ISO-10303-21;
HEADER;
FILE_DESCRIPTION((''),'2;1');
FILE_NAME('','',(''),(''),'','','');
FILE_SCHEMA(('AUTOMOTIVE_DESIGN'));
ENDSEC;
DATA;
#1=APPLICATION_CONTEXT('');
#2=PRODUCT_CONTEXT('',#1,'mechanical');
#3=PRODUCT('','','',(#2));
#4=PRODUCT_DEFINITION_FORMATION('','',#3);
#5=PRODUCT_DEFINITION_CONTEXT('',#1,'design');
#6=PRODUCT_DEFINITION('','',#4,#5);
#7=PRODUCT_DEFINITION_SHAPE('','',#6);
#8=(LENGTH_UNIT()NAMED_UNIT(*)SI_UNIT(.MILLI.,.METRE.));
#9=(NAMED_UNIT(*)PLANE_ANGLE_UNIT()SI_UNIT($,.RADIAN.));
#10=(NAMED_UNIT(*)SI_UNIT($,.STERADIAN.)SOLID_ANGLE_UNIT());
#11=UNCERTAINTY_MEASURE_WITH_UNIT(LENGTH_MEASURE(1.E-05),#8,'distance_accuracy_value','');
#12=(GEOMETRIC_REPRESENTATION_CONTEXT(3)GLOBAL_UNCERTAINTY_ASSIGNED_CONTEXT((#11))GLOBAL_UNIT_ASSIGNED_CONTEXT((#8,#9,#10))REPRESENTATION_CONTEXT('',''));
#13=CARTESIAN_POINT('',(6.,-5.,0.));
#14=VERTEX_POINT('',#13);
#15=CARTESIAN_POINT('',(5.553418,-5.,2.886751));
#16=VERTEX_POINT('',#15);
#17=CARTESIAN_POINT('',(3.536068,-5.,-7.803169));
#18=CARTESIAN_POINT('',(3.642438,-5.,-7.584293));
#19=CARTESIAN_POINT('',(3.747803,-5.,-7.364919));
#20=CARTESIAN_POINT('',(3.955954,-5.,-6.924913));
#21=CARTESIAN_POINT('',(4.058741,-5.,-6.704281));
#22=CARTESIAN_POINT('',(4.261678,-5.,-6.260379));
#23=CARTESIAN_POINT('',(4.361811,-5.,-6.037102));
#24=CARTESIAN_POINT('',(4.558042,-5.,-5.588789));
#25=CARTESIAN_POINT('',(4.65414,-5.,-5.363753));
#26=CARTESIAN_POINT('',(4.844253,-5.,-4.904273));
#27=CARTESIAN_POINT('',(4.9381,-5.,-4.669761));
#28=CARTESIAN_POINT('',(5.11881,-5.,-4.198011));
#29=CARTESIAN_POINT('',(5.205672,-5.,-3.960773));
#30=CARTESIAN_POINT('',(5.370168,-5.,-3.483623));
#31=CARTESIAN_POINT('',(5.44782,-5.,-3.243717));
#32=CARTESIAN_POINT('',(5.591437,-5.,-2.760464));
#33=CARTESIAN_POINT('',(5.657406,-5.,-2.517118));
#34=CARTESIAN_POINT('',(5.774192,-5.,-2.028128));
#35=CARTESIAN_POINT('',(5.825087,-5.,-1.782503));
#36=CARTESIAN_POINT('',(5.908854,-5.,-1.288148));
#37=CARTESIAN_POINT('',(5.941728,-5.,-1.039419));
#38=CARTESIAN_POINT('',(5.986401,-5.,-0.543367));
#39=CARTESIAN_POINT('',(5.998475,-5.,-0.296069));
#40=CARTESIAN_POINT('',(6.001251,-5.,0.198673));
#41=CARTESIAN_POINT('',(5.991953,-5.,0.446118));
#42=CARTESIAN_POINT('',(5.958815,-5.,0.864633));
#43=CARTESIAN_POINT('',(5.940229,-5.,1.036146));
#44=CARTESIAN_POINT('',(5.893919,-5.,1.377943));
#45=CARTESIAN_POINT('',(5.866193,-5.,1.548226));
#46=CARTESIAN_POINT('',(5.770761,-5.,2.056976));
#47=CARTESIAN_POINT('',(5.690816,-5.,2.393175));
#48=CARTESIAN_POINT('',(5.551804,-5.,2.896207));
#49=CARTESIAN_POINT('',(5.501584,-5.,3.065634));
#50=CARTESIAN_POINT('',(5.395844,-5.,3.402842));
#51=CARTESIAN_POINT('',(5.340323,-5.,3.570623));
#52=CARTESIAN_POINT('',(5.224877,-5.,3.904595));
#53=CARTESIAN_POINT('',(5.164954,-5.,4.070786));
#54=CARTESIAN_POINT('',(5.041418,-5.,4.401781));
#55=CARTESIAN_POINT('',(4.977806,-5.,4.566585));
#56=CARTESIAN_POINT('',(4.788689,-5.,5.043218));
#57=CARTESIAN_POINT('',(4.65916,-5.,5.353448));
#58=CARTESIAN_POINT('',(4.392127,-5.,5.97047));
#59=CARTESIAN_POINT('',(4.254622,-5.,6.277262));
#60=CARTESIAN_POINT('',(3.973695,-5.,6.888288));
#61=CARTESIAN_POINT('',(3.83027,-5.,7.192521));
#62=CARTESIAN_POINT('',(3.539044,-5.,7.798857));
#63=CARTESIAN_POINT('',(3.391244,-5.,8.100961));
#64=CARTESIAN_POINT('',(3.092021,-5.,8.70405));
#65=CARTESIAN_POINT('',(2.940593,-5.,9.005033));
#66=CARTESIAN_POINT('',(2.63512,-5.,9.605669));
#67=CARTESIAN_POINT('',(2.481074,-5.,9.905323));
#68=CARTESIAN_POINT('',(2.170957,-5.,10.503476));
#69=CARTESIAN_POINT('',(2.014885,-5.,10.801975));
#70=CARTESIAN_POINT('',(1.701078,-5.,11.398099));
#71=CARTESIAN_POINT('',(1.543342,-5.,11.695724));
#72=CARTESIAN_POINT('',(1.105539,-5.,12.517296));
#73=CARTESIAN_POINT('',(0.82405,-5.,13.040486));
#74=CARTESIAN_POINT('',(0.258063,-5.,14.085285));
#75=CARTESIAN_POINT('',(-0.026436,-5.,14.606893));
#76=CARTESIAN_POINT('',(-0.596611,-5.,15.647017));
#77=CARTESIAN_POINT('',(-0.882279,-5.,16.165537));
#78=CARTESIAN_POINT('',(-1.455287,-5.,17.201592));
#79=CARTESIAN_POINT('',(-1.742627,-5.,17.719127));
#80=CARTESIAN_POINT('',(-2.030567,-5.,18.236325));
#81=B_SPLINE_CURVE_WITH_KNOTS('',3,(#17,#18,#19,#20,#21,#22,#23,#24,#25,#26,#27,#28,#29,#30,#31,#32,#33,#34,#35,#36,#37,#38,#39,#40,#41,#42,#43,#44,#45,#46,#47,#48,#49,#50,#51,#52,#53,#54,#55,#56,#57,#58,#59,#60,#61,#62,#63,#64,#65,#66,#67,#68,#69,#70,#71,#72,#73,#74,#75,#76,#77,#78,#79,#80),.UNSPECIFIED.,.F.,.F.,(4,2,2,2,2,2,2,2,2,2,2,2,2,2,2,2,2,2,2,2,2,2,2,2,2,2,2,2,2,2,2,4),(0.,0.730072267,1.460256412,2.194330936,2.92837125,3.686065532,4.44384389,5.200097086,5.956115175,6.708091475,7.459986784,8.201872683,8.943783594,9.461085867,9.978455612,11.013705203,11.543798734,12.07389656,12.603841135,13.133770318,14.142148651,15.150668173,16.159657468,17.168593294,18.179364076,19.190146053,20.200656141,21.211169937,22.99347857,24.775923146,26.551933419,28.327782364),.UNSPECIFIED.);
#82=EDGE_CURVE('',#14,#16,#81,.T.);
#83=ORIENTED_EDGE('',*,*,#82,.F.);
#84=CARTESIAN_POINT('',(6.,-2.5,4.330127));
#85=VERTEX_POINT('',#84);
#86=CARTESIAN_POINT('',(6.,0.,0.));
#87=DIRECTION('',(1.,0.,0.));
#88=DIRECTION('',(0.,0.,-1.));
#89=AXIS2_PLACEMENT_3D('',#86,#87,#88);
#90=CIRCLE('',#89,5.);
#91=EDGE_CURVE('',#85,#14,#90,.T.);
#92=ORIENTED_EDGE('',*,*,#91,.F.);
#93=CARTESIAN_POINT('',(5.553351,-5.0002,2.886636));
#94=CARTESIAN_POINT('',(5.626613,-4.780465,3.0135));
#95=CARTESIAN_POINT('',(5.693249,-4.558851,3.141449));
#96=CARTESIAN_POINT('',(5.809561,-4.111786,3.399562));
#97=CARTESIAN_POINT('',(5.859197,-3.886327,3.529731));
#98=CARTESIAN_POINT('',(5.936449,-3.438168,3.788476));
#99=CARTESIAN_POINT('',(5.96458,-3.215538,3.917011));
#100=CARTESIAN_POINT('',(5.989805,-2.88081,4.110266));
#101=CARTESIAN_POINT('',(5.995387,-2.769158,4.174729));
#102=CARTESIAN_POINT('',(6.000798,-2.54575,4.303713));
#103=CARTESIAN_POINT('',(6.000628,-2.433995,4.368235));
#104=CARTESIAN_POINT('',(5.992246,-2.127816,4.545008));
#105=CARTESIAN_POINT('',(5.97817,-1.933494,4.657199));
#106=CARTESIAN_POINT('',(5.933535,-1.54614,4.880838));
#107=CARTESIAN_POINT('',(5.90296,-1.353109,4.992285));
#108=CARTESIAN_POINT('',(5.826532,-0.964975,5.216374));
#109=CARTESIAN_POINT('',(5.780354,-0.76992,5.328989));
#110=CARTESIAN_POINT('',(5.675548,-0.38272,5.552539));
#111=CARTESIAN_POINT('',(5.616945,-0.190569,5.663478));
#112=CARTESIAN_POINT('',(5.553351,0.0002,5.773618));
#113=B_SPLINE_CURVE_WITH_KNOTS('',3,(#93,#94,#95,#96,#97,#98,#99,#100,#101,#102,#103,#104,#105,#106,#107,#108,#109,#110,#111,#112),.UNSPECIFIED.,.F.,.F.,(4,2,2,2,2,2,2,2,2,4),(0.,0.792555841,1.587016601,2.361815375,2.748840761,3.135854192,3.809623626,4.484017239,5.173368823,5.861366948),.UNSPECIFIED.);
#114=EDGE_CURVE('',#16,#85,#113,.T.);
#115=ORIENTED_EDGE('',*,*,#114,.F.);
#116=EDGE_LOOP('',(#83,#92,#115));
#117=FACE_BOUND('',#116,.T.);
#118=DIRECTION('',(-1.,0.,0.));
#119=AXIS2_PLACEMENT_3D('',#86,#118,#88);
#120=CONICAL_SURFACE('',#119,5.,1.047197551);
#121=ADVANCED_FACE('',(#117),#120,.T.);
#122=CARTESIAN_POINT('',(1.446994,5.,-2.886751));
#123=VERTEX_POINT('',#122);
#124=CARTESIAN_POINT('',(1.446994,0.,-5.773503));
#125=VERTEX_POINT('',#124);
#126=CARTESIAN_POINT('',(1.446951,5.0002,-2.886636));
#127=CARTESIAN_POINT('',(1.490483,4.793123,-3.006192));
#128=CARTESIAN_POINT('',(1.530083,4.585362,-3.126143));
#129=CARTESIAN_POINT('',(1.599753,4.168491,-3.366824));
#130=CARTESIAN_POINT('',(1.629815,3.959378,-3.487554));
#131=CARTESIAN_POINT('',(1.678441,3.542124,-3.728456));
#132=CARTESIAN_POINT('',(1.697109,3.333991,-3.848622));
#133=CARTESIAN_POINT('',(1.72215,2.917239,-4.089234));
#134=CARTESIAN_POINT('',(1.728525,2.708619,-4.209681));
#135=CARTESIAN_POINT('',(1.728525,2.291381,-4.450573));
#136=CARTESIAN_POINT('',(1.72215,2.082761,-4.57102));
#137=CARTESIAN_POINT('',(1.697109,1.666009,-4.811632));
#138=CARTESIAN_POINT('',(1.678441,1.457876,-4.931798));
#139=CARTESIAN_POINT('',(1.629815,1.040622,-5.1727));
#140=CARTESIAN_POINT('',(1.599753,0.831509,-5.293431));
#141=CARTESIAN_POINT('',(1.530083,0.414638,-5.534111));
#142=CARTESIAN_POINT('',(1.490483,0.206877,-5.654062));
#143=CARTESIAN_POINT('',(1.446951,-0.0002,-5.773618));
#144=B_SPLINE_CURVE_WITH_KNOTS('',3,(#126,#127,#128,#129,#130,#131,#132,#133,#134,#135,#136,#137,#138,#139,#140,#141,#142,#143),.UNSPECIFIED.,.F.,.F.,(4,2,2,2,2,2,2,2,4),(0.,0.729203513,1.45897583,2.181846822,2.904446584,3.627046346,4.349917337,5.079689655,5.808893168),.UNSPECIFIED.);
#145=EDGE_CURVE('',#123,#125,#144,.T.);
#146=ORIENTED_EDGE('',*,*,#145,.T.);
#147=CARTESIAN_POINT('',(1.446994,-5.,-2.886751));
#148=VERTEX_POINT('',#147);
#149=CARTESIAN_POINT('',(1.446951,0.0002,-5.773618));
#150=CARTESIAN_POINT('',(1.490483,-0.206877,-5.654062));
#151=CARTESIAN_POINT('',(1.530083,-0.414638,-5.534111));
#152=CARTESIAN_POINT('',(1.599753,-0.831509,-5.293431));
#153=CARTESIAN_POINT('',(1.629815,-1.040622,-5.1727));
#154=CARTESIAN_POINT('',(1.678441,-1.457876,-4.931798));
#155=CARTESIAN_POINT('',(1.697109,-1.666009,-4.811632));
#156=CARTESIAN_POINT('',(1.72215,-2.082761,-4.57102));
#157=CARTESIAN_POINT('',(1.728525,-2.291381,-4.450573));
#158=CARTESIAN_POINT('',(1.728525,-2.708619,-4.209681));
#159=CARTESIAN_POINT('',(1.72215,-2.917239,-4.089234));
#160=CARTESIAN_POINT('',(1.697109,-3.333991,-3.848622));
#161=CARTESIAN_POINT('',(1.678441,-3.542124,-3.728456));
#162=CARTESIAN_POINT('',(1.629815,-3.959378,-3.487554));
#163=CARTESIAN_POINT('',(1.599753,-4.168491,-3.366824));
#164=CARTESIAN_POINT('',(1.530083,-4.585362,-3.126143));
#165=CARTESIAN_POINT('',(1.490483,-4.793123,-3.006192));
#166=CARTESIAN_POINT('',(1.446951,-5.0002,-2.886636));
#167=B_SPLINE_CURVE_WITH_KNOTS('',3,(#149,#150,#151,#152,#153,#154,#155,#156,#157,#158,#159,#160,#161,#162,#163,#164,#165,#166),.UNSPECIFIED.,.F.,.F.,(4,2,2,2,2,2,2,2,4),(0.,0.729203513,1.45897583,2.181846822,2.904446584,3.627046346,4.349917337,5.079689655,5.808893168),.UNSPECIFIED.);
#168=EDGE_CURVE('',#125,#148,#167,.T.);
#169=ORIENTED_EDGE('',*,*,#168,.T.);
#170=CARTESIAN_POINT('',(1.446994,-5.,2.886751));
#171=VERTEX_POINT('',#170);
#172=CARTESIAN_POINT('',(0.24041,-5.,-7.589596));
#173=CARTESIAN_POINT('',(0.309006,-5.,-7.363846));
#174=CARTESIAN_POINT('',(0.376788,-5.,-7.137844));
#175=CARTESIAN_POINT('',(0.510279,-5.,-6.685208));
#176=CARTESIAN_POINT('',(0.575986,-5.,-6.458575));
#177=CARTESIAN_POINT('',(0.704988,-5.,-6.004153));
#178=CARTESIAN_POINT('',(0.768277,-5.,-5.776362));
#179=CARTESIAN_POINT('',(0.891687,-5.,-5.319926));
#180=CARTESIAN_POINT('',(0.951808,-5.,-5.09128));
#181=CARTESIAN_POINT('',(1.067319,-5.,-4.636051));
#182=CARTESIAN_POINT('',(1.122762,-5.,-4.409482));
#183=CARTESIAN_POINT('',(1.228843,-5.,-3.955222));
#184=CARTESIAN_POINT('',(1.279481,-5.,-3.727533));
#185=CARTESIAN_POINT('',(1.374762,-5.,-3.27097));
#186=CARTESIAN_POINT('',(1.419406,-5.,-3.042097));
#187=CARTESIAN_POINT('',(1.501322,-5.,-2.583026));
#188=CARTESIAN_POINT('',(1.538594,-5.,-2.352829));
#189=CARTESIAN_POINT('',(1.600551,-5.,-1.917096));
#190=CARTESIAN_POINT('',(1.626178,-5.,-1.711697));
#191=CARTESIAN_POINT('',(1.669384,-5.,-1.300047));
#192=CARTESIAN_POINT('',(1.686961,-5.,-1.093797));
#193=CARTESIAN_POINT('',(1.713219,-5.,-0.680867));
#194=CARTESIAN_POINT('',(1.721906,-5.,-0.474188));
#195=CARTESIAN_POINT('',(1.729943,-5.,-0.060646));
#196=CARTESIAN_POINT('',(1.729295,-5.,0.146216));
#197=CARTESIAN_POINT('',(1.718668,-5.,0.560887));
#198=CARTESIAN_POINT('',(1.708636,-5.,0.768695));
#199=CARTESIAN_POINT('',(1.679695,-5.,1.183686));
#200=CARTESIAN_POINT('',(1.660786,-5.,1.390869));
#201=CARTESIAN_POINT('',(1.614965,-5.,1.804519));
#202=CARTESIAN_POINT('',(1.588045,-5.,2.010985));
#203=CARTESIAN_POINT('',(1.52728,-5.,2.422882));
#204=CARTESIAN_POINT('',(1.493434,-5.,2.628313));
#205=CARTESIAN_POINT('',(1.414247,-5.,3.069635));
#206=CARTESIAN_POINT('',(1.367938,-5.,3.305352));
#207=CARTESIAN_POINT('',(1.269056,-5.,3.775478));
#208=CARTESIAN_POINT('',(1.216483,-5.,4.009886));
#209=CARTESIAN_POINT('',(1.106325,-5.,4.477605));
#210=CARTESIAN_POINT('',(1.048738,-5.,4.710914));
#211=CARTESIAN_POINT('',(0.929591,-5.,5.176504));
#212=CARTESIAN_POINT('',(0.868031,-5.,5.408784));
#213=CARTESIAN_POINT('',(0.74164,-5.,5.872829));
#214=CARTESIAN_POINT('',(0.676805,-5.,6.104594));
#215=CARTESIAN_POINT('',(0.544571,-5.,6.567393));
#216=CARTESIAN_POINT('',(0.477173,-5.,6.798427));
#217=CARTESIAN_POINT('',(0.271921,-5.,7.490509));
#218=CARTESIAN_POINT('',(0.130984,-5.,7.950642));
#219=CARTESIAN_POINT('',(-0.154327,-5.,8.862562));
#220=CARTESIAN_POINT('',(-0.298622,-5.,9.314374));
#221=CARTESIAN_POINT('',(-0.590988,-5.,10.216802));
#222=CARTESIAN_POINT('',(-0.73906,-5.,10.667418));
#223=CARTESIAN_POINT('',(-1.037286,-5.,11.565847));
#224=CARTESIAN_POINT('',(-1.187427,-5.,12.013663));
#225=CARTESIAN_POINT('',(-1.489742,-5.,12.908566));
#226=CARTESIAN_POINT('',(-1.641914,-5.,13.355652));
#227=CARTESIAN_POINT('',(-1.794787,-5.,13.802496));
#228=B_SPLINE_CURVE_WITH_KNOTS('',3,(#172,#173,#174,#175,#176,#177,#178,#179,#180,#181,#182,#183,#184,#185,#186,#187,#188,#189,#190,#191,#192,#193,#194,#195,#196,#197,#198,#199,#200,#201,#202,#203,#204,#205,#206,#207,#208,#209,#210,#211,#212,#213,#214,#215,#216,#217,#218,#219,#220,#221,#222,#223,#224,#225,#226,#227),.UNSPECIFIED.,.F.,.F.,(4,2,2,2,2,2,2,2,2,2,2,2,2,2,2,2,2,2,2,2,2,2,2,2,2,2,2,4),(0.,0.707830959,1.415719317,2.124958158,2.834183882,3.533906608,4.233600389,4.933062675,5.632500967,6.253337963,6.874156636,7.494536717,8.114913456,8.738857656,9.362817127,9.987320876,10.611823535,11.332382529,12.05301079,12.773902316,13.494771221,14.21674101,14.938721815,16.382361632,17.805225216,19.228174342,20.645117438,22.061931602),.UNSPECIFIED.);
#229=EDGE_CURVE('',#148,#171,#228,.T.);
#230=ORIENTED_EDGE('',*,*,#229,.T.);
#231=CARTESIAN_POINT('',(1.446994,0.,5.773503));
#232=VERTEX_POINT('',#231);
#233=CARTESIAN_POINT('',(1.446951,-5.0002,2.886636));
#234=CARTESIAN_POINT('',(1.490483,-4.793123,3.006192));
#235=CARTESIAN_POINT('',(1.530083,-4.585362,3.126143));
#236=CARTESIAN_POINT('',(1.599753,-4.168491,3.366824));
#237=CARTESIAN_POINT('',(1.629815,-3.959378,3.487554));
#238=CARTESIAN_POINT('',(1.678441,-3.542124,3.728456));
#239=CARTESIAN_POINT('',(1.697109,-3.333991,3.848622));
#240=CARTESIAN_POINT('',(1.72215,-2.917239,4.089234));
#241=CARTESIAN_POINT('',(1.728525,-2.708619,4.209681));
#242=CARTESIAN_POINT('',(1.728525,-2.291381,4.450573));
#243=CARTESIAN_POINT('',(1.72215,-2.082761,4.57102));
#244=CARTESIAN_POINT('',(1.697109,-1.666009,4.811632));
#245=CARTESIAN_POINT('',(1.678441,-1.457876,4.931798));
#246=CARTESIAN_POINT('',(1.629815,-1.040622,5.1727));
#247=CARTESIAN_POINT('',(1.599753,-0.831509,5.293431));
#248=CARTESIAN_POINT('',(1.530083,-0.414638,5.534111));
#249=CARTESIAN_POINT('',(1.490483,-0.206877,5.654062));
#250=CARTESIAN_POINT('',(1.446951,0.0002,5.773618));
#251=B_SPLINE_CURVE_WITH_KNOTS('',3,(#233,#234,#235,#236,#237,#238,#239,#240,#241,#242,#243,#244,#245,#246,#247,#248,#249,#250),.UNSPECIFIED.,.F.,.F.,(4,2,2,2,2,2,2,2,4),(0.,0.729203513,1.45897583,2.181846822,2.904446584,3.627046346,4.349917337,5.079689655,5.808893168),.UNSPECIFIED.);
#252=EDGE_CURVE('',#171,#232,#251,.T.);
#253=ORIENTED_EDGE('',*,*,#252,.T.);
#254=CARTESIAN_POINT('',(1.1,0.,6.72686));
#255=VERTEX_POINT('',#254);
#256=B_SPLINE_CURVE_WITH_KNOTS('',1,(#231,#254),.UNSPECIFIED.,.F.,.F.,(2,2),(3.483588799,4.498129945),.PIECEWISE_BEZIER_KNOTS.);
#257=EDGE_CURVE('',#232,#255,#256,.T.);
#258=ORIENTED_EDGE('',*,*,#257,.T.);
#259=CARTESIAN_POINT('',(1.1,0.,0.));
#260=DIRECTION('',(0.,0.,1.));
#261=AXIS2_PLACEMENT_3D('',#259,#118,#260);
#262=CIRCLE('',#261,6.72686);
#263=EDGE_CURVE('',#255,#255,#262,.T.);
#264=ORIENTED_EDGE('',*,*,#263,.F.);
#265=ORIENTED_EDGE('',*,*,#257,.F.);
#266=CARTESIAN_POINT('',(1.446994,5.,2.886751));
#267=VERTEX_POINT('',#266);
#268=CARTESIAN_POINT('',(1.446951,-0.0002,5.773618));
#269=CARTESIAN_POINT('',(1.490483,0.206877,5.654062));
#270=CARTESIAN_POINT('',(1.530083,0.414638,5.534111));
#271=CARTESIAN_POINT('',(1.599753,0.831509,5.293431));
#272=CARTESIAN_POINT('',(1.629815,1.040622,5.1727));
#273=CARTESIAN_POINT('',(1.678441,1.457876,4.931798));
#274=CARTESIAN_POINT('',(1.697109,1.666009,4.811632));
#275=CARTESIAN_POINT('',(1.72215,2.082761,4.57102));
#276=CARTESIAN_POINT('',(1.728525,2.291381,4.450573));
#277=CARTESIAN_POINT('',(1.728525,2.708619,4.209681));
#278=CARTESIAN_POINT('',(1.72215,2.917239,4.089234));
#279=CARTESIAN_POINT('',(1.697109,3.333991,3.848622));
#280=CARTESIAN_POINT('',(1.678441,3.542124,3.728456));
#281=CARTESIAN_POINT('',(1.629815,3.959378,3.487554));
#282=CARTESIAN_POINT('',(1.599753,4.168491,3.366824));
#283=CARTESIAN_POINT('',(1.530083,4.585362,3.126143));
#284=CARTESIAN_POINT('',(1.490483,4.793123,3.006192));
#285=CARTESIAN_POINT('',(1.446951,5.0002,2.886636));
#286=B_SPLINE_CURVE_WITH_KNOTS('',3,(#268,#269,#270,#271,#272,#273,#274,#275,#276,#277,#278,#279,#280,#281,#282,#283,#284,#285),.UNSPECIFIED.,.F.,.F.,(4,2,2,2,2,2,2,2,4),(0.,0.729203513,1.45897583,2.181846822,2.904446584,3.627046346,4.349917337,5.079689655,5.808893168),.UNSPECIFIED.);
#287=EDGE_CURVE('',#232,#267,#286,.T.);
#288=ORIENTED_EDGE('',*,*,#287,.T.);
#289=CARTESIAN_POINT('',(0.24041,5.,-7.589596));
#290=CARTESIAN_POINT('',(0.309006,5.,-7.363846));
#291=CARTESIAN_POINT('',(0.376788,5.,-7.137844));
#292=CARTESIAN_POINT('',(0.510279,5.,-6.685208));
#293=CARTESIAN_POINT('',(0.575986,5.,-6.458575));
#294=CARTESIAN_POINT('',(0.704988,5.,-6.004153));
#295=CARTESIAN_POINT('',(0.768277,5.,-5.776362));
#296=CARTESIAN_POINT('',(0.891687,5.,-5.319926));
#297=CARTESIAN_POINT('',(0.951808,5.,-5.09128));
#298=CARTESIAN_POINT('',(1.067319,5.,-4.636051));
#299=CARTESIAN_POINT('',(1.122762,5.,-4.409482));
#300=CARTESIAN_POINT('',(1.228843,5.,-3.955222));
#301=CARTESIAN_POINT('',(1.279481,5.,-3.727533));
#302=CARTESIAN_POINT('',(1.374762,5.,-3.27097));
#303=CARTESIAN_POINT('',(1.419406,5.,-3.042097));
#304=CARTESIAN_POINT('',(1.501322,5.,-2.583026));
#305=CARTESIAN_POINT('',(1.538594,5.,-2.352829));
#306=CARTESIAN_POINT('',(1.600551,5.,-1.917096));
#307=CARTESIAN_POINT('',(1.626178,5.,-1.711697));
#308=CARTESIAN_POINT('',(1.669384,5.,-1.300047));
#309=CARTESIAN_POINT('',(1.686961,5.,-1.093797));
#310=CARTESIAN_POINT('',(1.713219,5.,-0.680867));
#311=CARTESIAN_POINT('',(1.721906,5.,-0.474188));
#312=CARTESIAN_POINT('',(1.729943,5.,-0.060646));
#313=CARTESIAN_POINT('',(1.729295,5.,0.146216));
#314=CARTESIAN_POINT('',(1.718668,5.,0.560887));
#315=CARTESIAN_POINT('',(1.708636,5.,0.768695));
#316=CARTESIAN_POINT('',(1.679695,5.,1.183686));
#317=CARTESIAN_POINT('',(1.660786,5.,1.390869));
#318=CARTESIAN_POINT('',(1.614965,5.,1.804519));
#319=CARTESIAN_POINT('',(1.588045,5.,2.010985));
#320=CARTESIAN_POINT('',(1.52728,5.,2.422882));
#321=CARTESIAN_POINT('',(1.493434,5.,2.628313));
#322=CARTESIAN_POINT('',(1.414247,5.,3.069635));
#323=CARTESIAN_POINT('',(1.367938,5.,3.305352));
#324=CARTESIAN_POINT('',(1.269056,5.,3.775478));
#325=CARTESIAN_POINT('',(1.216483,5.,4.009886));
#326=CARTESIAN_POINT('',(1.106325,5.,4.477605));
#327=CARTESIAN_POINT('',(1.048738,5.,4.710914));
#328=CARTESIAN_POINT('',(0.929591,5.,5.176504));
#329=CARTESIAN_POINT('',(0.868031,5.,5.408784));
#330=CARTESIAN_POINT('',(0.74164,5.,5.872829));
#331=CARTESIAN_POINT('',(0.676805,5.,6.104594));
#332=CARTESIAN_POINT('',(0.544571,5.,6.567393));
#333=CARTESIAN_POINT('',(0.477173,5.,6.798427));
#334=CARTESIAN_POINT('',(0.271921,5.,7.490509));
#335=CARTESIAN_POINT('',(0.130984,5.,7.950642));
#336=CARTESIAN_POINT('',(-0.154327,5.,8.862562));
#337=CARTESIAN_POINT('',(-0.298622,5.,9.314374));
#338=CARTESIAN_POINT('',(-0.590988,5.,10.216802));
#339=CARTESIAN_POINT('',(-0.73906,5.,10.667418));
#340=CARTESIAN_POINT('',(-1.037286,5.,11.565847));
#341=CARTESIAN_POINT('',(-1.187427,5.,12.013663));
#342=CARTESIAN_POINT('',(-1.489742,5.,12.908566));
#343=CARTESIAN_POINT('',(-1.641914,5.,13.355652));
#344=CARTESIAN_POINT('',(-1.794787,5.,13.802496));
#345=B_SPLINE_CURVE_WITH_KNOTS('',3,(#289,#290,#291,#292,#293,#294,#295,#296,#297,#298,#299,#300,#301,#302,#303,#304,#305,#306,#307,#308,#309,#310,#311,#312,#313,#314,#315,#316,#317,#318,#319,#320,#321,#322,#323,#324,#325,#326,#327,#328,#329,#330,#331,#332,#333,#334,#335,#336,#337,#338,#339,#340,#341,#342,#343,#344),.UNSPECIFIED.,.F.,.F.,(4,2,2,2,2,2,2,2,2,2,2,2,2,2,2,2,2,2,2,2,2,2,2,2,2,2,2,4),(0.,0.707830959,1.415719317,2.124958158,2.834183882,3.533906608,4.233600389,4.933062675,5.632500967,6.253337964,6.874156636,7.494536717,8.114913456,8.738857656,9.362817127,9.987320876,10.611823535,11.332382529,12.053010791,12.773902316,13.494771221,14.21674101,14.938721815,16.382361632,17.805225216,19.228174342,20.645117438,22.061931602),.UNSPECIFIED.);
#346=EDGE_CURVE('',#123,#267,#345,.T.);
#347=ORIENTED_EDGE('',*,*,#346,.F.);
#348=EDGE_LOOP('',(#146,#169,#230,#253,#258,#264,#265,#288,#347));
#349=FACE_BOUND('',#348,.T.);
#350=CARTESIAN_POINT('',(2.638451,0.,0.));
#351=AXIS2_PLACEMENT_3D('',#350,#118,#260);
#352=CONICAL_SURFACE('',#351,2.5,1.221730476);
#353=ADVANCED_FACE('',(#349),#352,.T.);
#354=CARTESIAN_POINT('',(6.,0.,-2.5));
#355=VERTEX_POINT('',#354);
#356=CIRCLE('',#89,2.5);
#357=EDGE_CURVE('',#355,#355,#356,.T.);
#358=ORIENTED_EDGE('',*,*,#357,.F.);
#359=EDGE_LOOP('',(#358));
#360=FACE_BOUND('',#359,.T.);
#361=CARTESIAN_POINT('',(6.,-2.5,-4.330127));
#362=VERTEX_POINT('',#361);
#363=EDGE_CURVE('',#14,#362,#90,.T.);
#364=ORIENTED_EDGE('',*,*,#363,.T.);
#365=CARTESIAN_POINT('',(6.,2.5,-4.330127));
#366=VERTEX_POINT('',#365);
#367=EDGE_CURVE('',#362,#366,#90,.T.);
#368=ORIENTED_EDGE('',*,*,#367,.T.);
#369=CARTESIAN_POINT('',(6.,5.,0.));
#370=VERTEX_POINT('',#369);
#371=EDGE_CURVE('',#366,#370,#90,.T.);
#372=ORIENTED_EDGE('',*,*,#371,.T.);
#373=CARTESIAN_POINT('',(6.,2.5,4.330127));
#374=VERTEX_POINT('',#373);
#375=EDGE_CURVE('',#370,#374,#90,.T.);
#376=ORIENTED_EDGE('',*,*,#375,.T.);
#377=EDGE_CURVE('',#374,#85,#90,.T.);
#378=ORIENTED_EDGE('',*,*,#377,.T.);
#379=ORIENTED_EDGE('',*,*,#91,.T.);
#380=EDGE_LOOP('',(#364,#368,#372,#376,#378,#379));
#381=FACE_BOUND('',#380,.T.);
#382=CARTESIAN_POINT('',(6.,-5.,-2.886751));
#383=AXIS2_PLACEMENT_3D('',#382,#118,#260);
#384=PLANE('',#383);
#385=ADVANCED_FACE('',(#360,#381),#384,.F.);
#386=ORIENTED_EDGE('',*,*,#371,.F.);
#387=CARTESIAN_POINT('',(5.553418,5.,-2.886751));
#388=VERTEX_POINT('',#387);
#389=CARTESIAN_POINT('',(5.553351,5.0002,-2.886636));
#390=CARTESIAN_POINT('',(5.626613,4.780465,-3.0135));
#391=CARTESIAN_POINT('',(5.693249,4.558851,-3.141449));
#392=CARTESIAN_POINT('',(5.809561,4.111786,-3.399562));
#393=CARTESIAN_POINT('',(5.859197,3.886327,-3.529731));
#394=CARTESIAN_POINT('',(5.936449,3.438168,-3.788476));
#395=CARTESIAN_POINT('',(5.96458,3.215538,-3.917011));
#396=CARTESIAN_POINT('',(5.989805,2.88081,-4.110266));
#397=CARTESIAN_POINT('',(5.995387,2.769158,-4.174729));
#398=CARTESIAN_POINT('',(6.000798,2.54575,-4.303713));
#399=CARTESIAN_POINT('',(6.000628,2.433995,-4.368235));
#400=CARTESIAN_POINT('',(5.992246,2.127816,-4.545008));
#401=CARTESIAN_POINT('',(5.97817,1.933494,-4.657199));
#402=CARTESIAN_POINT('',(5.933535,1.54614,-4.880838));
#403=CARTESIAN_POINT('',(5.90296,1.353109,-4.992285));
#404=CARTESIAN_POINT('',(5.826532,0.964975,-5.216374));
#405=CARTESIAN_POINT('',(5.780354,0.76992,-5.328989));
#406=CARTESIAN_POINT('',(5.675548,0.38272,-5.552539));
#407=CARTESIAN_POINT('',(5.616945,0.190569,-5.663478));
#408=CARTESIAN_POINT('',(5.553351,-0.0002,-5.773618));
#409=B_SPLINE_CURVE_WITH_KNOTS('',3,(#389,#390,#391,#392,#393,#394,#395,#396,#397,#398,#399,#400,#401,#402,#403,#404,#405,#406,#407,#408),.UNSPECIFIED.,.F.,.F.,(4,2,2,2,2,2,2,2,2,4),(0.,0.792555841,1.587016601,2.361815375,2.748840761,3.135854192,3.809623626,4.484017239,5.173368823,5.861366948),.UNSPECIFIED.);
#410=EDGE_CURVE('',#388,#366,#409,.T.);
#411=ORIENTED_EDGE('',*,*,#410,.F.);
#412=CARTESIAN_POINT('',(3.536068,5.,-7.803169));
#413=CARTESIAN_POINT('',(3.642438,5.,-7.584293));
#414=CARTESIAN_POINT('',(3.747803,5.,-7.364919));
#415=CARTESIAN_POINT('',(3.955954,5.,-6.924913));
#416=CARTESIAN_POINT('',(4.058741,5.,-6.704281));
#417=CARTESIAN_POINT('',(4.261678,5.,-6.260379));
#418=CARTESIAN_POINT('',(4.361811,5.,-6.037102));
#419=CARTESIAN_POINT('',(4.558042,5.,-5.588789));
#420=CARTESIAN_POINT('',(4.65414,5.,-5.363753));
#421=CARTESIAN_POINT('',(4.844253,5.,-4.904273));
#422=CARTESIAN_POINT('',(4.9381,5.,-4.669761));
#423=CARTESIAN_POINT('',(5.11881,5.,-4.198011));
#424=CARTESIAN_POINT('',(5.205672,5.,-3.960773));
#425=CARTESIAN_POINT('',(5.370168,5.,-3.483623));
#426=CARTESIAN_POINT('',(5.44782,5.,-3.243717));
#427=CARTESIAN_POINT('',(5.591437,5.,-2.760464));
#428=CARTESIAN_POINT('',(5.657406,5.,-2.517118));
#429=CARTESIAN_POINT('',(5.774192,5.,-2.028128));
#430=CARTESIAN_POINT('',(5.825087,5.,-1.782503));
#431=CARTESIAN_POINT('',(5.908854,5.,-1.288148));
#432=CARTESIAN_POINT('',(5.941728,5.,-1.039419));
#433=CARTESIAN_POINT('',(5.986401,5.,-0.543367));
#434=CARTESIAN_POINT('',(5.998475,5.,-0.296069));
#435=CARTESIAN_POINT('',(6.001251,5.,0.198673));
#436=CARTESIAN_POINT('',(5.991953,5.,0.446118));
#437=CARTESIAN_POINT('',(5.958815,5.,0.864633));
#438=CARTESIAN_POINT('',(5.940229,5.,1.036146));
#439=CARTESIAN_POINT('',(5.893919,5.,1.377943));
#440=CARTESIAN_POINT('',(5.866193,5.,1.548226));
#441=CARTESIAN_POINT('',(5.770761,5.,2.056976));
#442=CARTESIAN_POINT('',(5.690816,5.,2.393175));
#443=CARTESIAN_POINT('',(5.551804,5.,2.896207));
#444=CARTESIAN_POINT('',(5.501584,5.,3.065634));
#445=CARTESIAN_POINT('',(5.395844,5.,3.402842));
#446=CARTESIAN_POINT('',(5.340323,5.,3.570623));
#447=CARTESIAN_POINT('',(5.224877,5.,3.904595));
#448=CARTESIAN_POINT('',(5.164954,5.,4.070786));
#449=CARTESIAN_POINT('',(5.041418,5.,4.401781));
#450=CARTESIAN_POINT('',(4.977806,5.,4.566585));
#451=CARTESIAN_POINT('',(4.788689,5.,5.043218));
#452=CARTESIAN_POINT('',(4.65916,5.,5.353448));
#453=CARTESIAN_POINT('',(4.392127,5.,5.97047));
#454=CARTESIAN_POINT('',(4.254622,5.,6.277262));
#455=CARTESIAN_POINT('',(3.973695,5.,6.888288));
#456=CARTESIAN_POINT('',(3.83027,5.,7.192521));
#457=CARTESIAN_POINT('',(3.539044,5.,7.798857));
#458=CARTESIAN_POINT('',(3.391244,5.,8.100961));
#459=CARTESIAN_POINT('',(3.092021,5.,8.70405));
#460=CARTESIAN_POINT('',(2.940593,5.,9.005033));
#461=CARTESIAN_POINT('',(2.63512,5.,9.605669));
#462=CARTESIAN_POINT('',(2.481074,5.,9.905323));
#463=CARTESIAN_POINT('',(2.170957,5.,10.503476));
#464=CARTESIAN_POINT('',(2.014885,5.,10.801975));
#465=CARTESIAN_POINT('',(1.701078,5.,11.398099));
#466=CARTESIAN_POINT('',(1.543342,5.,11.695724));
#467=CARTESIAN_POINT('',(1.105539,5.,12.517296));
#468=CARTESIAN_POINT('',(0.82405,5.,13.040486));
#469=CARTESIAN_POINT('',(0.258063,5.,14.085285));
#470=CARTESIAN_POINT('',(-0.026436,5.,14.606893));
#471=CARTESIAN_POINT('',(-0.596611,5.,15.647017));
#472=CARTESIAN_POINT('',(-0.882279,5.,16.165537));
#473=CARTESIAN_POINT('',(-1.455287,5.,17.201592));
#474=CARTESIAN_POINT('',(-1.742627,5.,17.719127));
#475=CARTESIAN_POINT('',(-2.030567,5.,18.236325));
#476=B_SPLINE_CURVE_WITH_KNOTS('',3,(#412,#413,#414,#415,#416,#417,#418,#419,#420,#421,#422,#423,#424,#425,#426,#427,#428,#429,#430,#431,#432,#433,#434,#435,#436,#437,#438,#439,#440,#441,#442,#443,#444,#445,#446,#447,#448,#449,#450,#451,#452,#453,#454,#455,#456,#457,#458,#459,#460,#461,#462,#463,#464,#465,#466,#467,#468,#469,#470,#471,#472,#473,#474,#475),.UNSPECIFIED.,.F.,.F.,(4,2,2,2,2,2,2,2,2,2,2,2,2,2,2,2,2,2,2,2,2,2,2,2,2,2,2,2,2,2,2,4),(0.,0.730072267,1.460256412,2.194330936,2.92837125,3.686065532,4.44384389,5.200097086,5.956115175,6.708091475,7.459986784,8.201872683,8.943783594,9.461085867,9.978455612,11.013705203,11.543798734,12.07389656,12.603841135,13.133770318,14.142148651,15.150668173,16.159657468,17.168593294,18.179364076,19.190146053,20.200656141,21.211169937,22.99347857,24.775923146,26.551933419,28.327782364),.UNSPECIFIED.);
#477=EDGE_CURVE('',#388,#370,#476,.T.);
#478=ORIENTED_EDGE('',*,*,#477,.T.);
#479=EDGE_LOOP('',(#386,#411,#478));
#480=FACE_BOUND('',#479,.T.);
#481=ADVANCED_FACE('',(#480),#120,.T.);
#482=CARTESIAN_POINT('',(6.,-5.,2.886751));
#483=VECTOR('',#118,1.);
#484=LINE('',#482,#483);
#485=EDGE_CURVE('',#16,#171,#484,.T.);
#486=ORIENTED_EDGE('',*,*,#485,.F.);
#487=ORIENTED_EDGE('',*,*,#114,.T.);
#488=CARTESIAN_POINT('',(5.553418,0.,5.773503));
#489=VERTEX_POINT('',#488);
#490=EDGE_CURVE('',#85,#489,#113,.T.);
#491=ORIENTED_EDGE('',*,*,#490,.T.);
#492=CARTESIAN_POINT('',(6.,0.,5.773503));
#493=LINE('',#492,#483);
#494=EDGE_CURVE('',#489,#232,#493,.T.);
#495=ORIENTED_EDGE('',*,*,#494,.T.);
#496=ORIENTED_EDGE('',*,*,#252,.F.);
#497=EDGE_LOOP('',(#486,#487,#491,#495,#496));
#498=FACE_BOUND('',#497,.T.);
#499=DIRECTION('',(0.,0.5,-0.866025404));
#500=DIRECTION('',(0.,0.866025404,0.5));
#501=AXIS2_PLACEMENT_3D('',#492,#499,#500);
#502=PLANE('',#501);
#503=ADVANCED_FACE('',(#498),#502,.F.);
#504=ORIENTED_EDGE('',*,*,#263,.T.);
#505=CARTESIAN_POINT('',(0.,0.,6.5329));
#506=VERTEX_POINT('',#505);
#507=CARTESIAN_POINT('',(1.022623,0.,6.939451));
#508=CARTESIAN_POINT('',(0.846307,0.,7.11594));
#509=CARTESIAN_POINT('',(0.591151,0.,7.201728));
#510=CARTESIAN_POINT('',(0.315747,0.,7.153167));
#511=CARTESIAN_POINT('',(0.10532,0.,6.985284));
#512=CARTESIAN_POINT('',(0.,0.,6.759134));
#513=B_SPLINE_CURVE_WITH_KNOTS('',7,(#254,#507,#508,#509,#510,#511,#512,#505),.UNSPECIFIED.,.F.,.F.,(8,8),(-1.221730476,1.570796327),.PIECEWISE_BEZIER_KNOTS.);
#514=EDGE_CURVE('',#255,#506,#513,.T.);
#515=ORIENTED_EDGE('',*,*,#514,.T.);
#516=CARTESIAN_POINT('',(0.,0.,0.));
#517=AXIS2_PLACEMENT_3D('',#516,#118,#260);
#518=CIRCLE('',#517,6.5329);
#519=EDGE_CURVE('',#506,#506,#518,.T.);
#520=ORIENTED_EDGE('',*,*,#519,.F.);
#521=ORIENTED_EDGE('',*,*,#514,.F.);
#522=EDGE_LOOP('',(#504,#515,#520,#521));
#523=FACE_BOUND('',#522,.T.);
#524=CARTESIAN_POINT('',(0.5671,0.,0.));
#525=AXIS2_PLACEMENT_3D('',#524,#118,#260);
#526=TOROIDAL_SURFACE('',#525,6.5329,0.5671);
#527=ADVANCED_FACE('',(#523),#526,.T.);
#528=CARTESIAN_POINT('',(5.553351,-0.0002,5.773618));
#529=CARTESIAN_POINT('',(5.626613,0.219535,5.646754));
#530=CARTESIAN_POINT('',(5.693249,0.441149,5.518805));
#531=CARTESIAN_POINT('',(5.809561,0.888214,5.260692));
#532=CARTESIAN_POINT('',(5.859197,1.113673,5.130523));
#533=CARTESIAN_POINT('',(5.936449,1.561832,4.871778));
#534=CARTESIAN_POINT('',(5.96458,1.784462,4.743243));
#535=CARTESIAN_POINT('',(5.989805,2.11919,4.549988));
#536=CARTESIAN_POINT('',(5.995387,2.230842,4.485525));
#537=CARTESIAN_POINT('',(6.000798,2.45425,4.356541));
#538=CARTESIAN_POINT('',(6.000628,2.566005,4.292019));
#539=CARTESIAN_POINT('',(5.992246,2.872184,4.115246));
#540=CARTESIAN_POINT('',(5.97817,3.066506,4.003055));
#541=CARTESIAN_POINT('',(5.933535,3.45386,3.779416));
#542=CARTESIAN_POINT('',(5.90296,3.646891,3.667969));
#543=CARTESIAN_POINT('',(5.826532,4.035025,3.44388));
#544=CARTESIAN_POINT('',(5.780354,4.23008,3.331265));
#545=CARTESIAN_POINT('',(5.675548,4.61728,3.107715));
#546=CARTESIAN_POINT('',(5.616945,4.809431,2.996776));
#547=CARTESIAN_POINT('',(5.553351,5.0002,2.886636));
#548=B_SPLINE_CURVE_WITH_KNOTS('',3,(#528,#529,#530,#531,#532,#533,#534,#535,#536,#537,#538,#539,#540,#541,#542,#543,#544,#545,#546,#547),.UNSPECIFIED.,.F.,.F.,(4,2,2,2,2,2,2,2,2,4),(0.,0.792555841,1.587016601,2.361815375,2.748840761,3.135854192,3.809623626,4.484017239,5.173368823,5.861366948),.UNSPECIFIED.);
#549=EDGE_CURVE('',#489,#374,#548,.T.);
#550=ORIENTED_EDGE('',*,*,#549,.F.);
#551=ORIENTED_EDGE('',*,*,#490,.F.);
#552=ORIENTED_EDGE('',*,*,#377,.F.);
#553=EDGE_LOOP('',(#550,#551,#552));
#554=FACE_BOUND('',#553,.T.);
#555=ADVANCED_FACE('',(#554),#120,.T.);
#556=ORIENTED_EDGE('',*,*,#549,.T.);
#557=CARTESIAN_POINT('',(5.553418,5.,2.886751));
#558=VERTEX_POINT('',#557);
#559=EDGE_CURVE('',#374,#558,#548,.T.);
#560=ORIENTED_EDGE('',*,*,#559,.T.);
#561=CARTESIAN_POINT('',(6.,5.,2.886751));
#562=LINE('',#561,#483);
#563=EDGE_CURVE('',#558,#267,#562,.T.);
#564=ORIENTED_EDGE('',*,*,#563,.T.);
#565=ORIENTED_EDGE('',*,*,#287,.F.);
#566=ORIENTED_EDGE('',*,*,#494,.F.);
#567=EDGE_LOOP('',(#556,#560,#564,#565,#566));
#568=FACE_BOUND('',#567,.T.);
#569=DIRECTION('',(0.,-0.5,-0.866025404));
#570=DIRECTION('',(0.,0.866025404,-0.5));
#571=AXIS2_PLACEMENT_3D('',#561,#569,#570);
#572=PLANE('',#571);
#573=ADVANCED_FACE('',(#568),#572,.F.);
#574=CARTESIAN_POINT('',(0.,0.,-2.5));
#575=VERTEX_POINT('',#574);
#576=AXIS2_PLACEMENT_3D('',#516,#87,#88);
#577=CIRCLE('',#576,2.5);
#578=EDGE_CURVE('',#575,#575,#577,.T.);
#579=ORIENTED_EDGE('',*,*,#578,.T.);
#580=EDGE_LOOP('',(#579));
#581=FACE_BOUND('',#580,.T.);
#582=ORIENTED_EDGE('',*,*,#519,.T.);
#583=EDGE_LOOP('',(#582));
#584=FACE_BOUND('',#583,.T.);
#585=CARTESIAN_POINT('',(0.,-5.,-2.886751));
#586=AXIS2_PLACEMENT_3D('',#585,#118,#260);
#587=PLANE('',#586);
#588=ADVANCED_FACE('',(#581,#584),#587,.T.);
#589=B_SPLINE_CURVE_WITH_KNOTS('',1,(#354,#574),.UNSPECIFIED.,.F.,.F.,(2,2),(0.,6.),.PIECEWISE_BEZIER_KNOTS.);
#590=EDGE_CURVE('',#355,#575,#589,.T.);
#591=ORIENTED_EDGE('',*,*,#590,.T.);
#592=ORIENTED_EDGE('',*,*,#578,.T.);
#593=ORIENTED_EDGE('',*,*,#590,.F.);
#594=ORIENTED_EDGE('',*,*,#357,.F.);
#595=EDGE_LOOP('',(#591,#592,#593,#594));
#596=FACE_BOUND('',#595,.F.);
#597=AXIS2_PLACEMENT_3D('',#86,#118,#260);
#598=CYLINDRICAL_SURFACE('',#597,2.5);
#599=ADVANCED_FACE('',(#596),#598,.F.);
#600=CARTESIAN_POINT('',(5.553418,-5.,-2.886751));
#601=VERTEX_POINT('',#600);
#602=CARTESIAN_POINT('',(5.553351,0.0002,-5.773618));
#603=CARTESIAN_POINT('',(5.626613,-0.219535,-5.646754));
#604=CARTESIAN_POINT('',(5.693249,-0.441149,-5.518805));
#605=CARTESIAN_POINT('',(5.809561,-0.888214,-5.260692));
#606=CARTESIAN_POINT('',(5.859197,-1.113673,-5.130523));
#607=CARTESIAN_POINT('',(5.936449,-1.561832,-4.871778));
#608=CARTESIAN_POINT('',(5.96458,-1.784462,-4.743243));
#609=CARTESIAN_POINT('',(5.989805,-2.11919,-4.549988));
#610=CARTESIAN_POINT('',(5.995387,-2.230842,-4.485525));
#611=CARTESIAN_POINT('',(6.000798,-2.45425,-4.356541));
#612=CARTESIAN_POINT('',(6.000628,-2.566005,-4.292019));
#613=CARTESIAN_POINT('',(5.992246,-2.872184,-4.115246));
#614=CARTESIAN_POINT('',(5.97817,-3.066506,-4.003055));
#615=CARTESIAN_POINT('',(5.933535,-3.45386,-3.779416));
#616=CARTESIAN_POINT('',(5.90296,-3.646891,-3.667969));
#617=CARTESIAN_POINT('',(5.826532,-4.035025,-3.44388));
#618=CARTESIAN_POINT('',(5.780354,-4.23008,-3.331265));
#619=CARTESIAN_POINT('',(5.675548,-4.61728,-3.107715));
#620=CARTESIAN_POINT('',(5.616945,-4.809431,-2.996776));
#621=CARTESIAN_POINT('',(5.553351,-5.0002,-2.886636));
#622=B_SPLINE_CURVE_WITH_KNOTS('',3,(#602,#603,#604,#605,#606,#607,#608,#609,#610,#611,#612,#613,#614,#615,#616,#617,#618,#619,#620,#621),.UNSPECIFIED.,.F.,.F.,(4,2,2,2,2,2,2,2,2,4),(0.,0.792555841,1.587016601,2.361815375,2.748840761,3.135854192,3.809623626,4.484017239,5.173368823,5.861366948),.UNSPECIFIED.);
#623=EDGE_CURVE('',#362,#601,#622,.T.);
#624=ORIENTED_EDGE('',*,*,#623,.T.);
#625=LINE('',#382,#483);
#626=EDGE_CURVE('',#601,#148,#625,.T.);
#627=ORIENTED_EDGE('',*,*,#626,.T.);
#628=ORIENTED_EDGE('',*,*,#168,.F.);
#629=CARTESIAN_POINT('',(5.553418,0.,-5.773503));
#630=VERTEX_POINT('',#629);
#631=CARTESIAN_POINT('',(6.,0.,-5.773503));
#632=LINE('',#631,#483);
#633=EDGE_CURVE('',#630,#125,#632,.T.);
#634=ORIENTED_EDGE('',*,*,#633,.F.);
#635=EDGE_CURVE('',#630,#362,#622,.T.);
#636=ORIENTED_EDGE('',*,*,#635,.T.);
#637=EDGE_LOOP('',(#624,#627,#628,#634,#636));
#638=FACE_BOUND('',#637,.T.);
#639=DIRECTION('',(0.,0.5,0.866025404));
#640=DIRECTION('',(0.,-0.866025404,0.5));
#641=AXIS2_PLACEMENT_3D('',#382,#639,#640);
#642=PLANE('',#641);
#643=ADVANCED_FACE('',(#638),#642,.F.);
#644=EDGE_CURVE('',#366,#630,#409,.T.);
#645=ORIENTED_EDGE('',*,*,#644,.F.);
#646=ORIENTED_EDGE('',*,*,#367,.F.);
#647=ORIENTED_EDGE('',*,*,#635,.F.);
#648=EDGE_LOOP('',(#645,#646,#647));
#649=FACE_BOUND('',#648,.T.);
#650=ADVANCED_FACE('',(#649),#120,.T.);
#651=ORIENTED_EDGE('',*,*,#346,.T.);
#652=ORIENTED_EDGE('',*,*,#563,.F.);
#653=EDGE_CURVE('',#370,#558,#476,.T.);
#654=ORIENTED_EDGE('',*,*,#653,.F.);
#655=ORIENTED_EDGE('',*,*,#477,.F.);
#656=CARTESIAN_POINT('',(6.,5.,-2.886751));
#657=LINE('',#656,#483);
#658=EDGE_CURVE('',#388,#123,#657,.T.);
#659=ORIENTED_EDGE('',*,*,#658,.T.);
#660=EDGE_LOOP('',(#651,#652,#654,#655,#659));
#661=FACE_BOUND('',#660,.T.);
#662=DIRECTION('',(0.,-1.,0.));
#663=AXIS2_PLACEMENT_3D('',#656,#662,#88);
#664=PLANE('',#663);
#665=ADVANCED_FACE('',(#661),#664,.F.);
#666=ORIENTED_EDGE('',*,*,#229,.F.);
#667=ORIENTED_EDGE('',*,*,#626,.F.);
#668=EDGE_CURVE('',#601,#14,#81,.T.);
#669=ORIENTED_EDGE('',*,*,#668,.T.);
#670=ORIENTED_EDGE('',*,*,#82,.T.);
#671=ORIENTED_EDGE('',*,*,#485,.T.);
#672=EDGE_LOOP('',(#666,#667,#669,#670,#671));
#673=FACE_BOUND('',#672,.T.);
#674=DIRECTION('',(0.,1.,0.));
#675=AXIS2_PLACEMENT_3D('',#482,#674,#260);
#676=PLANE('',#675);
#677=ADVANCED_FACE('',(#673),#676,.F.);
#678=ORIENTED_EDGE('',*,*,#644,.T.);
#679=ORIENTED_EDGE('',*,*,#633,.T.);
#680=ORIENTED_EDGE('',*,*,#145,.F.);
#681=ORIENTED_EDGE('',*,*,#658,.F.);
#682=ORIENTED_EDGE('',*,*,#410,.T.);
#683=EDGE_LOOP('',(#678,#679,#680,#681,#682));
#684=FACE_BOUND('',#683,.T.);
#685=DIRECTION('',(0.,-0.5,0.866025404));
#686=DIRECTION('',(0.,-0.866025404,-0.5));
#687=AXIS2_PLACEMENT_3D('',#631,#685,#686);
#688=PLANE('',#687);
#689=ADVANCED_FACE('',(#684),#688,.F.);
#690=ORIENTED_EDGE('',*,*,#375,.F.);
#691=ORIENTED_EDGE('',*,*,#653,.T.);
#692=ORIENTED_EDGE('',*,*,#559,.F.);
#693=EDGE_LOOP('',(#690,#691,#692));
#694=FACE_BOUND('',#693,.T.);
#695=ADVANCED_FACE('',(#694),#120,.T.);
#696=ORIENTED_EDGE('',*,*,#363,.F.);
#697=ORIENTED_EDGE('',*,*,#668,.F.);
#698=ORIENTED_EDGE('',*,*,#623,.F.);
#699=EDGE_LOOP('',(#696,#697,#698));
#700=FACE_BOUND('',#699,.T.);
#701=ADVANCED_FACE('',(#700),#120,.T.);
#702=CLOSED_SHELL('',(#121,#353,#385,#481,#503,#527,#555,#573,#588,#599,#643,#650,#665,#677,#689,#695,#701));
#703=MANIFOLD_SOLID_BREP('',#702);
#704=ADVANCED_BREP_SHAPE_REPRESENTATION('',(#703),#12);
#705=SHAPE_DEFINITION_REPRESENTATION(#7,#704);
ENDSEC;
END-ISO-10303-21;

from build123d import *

# Parameters (mm, degrees)
SKETCH1_R      = 2.5
EXTRUDE1_DEPTH = 6


# Read off the part's stored shape, not the designer's step: Cut-Extrude1
with BuildPart() as part:
    # Sketch1 → Extrude1 (new body)
    with BuildSketch(Plane(origin=(0, 0, 0), x_dir=(0, 0, -1), z_dir=(1, 0, 0))):
        Polygon((5.773502692, 0), (2.886751346, 5), (-2.886751346, 5), (-5.773502692, 0), (-2.886751346, -5), (2.886751346, -5), align=None)
        Circle(SKETCH1_R, mode=Mode.SUBTRACT)
    extrude(amount=EXTRUDE1_DEPTH)

    # Cut-Extrude1 outline → Cut-Extrude1 (revolve, cut)
    with BuildSketch(Plane.YX):
        Polygon((5.773502692, 6.000000845), (4.999998834, 6.000000845), (5.773502688, 5.553418015), align=None)
    revolve(axis=Axis((0, 0, 0), (1, 0, 0)), mode=Mode.SUBTRACT)

    # Sketch3 → Revolve1 (revolve)
    with BuildSketch(Plane.XY, mode=Mode.PRIVATE) as revolve1_sk:
        with BuildLine():
            Line((0, 2.5), (0, 6.532899838))
            ThreePointArc((0, 6.532899838), (0.468624253, 7.091384474), (1.1, 6.726859517))
            Line((1.1, 6.726859517), (2.638451048, 2.5))
            Line((2.638451048, 2.5), (0, 2.5))
        make_face()
    revolve(revolve1_sk.sketch.rotate(Axis((0, 0, 0), (1, 0, 0)), 90), axis=Axis((0, 0, 0), (1, 0, 0)))


solid = part.part
